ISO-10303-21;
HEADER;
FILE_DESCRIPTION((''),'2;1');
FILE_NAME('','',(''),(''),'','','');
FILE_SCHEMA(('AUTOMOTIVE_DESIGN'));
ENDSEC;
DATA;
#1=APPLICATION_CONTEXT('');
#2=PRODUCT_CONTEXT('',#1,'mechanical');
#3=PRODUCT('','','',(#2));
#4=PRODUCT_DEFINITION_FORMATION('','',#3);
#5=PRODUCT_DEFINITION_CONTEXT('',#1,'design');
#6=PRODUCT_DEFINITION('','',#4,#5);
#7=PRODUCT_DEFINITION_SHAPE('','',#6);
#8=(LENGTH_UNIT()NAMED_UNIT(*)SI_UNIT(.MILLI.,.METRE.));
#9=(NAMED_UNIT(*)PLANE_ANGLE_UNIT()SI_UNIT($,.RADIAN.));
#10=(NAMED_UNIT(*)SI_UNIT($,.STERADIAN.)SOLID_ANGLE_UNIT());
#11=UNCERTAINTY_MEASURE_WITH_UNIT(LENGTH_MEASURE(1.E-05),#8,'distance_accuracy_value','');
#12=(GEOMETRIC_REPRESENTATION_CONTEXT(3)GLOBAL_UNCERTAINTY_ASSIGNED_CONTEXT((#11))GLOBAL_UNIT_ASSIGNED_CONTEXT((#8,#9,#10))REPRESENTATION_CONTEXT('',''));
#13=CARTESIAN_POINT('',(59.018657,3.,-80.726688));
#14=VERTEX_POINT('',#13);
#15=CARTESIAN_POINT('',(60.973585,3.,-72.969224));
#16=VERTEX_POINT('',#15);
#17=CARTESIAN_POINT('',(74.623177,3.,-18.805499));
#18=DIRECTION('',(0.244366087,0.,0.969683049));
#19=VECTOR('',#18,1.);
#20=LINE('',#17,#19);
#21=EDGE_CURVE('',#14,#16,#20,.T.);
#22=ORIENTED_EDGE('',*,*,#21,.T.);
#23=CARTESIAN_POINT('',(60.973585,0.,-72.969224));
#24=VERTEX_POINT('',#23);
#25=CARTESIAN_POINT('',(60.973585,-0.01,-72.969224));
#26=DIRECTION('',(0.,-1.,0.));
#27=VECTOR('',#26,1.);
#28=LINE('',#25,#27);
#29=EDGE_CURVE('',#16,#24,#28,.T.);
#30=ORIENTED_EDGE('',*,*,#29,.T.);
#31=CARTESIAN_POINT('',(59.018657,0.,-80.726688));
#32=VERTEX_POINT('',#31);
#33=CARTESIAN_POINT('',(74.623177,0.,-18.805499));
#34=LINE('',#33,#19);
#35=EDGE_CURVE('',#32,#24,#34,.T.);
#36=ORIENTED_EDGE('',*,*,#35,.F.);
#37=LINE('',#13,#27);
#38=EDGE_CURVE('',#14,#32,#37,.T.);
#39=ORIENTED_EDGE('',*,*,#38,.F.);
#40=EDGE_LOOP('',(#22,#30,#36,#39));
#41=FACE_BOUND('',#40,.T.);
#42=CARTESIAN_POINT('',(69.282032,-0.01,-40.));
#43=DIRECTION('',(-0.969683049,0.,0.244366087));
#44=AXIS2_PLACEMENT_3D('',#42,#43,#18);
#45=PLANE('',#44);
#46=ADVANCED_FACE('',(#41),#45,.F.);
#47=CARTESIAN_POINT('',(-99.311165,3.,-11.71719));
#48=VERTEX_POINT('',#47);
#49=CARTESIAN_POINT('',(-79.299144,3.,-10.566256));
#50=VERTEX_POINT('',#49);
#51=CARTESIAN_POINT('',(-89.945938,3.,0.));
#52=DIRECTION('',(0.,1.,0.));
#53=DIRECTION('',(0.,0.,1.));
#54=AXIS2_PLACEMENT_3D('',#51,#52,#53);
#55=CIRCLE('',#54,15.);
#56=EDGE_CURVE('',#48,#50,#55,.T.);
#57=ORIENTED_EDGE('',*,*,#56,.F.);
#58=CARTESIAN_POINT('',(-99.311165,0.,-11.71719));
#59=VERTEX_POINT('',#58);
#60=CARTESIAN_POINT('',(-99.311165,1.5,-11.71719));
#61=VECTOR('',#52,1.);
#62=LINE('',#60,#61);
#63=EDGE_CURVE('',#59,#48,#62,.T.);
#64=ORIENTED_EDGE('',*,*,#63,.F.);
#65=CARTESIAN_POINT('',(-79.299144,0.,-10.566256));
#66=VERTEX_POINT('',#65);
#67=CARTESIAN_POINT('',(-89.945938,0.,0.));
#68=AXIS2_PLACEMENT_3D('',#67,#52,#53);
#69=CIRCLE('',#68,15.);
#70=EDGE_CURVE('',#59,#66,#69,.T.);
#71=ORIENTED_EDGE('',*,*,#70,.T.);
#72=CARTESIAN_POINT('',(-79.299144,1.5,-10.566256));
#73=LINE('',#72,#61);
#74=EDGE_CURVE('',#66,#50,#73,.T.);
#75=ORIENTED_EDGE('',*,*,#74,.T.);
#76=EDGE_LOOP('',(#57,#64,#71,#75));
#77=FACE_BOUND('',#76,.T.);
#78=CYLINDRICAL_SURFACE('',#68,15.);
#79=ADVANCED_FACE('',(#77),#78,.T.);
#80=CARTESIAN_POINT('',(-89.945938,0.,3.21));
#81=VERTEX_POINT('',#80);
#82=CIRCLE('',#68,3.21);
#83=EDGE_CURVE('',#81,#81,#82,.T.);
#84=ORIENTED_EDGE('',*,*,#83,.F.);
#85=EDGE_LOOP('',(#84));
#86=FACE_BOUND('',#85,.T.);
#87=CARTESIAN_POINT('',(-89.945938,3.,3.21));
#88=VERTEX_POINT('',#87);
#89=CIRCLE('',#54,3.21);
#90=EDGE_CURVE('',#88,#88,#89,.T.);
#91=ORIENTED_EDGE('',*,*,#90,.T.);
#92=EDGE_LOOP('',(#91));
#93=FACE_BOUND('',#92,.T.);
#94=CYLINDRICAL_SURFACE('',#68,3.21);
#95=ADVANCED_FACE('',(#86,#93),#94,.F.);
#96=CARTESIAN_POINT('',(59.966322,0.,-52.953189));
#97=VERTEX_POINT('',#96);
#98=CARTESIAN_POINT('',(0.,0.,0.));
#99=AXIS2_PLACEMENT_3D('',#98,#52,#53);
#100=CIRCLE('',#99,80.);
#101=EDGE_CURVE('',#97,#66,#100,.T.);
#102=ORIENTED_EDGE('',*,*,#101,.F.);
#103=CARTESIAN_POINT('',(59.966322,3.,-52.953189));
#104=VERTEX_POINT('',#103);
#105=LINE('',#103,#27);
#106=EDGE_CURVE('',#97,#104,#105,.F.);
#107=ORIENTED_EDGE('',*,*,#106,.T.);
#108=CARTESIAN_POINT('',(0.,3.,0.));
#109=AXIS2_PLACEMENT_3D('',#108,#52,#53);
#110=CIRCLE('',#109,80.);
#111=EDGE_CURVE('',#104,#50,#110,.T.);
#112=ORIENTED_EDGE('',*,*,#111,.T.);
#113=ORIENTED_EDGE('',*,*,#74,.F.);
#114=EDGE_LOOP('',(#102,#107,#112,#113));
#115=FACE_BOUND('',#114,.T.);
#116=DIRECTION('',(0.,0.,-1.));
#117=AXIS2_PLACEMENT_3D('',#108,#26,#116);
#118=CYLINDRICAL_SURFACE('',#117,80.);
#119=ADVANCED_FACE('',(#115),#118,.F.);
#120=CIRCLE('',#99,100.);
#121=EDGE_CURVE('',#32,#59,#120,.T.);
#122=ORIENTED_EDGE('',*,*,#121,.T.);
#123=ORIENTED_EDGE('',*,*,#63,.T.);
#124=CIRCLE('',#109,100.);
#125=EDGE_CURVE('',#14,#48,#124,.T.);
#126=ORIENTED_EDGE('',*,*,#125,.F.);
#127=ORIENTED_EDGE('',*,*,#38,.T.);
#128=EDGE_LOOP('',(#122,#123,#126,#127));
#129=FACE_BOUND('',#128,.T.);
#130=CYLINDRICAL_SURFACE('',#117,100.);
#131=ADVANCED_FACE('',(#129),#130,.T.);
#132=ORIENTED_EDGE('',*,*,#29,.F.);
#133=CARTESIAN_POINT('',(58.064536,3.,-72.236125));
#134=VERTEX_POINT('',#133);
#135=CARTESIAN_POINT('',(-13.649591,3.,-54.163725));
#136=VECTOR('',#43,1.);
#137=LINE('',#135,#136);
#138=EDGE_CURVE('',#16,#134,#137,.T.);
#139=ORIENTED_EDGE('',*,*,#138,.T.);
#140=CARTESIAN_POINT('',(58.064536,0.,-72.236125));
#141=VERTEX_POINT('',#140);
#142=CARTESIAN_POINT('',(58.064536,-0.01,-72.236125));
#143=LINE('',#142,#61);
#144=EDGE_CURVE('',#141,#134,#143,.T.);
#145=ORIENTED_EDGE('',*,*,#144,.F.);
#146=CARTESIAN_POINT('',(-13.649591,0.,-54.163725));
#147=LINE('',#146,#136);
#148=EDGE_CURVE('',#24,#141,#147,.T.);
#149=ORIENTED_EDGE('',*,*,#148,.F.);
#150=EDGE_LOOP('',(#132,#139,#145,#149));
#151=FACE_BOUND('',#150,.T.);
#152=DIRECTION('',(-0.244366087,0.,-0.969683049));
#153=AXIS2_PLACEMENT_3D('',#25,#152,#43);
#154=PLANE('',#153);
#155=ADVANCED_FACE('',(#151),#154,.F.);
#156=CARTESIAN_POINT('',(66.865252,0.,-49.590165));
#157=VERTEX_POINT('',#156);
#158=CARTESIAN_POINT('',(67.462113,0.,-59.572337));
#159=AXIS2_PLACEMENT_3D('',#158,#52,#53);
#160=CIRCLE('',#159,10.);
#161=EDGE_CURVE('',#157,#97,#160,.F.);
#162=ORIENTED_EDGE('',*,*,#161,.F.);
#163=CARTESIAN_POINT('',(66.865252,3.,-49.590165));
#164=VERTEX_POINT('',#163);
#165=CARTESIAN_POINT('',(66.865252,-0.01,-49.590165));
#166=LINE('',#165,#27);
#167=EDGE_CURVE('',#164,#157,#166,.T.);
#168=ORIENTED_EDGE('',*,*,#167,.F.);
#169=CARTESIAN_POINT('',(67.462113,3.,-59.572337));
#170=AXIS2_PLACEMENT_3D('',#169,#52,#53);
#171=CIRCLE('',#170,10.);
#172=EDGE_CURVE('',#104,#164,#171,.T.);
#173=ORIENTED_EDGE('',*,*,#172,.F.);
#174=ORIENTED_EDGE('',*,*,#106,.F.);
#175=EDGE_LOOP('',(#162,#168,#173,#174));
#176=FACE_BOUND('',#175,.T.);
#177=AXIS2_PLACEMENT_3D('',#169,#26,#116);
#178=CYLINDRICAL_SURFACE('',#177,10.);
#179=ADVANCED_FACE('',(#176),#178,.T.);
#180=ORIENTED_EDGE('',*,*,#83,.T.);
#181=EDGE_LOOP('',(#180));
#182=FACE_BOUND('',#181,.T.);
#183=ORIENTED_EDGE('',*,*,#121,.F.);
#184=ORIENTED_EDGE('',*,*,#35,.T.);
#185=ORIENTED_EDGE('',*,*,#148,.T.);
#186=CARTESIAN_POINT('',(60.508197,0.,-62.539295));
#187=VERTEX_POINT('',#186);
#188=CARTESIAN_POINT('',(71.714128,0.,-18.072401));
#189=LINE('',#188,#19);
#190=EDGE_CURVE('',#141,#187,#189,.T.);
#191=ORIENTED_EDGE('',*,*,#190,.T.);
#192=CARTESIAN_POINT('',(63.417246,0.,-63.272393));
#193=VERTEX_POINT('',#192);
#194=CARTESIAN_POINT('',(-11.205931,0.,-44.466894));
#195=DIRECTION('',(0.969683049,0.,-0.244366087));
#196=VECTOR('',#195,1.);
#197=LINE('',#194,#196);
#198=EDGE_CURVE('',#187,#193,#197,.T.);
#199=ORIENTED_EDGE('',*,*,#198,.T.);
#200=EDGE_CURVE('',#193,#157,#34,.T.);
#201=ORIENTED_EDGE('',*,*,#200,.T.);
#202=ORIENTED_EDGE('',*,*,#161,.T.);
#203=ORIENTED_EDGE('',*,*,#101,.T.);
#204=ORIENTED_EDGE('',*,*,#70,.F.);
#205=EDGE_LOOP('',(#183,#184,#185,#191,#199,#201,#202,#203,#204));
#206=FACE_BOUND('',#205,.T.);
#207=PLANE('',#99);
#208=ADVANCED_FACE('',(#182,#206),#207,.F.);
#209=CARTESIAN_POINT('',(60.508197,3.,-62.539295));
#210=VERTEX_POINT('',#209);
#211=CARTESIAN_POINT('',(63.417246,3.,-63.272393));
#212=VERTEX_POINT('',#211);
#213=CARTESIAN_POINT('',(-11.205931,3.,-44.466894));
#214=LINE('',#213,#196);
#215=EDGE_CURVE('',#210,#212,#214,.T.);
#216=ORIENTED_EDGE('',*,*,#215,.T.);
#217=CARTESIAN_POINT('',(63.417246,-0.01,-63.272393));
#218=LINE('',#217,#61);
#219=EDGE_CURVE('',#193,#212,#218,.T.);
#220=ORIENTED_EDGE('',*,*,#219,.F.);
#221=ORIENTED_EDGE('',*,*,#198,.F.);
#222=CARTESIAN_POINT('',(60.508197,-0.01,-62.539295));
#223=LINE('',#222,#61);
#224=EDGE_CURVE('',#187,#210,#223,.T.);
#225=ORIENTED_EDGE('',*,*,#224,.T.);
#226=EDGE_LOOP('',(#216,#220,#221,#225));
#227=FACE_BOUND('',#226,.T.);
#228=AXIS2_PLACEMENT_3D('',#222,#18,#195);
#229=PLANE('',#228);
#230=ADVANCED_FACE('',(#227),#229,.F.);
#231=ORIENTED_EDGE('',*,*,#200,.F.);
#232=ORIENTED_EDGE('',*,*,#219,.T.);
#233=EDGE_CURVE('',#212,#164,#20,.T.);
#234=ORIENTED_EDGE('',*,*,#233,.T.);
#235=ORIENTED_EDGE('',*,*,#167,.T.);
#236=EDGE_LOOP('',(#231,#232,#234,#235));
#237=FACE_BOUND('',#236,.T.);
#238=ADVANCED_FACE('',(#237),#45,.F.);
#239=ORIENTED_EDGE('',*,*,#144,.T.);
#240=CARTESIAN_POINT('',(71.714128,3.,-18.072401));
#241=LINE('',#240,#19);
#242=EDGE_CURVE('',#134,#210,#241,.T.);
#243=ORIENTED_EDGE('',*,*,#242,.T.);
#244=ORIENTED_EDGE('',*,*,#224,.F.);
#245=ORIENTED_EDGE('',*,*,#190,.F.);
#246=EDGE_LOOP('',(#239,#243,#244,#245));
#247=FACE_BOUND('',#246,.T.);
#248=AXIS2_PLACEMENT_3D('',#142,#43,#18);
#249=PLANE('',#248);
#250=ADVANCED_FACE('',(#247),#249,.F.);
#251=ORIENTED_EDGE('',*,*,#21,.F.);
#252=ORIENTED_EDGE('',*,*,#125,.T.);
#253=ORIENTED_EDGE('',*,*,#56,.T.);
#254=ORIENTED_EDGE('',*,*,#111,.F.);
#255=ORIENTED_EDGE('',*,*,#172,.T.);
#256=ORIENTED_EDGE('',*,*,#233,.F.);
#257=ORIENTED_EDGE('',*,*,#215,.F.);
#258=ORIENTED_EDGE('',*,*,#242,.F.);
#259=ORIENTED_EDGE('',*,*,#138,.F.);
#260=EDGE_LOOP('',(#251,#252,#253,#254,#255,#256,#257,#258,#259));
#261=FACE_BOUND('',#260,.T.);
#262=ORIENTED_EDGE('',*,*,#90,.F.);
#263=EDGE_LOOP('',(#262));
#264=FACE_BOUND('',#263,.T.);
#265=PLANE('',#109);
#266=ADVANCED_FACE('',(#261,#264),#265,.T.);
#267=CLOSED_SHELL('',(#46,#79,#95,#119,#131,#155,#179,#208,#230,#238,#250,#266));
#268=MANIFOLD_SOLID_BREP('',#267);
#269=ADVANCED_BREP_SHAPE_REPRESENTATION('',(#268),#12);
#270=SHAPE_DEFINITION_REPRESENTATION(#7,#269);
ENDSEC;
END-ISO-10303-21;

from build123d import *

# Parameters (mm, degrees)
SKETCH3_R              = 100
SKETCH3_R_2            = 80
BOSS_EXTRUDE1_DEPTH    = 3
SPLIT2_SURFACE_1_BACK  = 283.859
SPLIT2_SURFACE_1_DEPTH = 567.718
SPLIT2_SURFACE_2_BACK  = 283.859
SPLIT2_SURFACE_2_DEPTH = 567.718
BODY_DELETE1_DEPTH     = 3
SKETCH5_R              = 15
BOSS_EXTRUDE2_DEPTH    = 3
SKETCH6_R              = 3.21
CUT_EXTRUDE1_DEPTH     = 3
SPLIT3_SURFACE_3_BACK  = 209.781
SPLIT3_SURFACE_3_DEPTH = 419.562
SPLIT3_SURFACE_4_BACK  = 209.781
SPLIT3_SURFACE_4_DEPTH = 419.562
SPLIT4_SURFACE_5_BACK  = 209.781
SPLIT4_SURFACE_5_DEPTH = 419.562
SPLIT4_SURFACE_6_BACK  = 209.781
SPLIT4_SURFACE_6_DEPTH = 419.562
FILLET1_R              = 10
SPLIT5_SURFACE_7_BACK  = 207.768
SPLIT5_SURFACE_7_DEPTH = 415.536
SPLIT5_SURFACE_8_BACK  = 207.768
SPLIT5_SURFACE_8_DEPTH = 415.536


# Read off the part's stored shape, not the designer's step: Body-Delete1
with BuildPart() as part:
    # Sketch3 → Boss-Extrude1 (new body)
    with BuildSketch(Plane(origin=(0, 0, 0), x_dir=(1, 0, 0), z_dir=(0, 1, 0))):
        with Locations(Location((0, 0, 0), (0, 0, 270))):
            Circle(SKETCH3_R)
        with Locations(Location((0, 0, 0), (0, 0, 270))):
            Circle(SKETCH3_R_2, mode=Mode.SUBTRACT)
    extrude(amount=BOSS_EXTRUDE1_DEPTH)


with BuildPart() as body_2:
    # Split2: the piece behind the surface
    add(part.part)
    # Split2 surface: a surface, the sketch's curves swept straight by 567.718 mm
    with BuildLine(Plane(origin=(0, 3, 0), x_dir=(1, 0, 0), z_dir=(0, 1, 0)).offset(-SPLIT2_SURFACE_1_BACK), mode=Mode.PRIVATE) as split2_surface_1_path:
        Line((69.282032303, 72.111025509), (69.282032303, 40))
        Line((69.282032303, 40), (69.282032303, 0))
        Line((69.282032303, 0), (-114.167790304, 0))
        Line((-114.167790304, 0), (-114.167790304, -108.297460661))
        Line((-114.167790304, -108.297460661), (110.524137422, -108.297460661))
        Line((110.524137422, -108.297460661), (110.524137422, 72.111025509))
        Line((110.524137422, 72.111025509), (69.282032303, 72.111025509))
    split2_surface_1 = Shell.extrude(split2_surface_1_path.wire(), (0 * SPLIT2_SURFACE_1_DEPTH, 1 * SPLIT2_SURFACE_1_DEPTH, 0 * SPLIT2_SURFACE_1_DEPTH))
    split(bisect_by=split2_surface_1, keep=Keep.BOTTOM)

    # Sketch5 → Boss-Extrude2 (add)
    with BuildSketch(Plane(origin=(0, 3, 0), x_dir=(1, 0, 0), z_dir=(0, 1, 0))):
        with Locations((-89.945938306, 0)):
            Circle(SKETCH5_R)
    extrude(amount=-BOSS_EXTRUDE2_DEPTH)

    # Sketch6 → Cut-Extrude1 (cut)
    with BuildSketch(Plane(origin=(0, 3, 0), x_dir=(1, 0, 0), z_dir=(0, 1, 0))):
        with Locations(Location((-89.945938306, 0, 0), (0, 0, 270))):
            Circle(SKETCH6_R)
    extrude(amount=-CUT_EXTRUDE1_DEPTH, mode=Mode.SUBTRACT)


with BuildPart() as part_1:
    add(part.part)

    # Split2: split by a surface, the side it looks to stays
    # Split2 surface: a surface, the sketch's curves swept straight by 567.718 mm
    with BuildLine(Plane(origin=(0, 3, 0), x_dir=(1, 0, 0), z_dir=(0, 1, 0)).offset(-SPLIT2_SURFACE_2_BACK), mode=Mode.PRIVATE) as split2_surface_2_path:
        Line((69.282032303, 72.111025509), (69.282032303, 40))
        Line((69.282032303, 40), (69.282032303, 0))
        Line((69.282032303, 0), (-114.167790304, 0))
        Line((-114.167790304, 0), (-114.167790304, -108.297460661))
        Line((-114.167790304, -108.297460661), (110.524137422, -108.297460661))
        Line((110.524137422, -108.297460661), (110.524137422, 72.111025509))
        Line((110.524137422, 72.111025509), (69.282032303, 72.111025509))
    split2_surface_2 = Shell.extrude(split2_surface_2_path.wire(), (0 * SPLIT2_SURFACE_2_DEPTH, 1 * SPLIT2_SURFACE_2_DEPTH, 0 * SPLIT2_SURFACE_2_DEPTH))
    split(bisect_by=split2_surface_2, keep=Keep.TOP)

    # Body-Delete1 outline → Body-Delete1 (cut)
    with BuildSketch(Plane(origin=(0, 0, 0), x_dir=(1, 0, 0), z_dir=(0, 1, 0))):
        with BuildLine():
            ThreePointArc((-100, 0), (39.190539482, -92.000552255), (69.282032303, 72.111025509))
            Line((69.282032303, 72.111025509), (69.282032303, 40))
            ThreePointArc((69.282032303, 40), (20.705523608, -77.274066103), (-80, 0))
            Line((-80, 0), (-100, 0))
        make_face()
    extrude(amount=BODY_DELETE1_DEPTH, mode=Mode.SUBTRACT)


with BuildPart() as body_2_2:
    # Split3: the piece behind the surface
    add(body_2.part)
    # Split3 surface: a surface, the sketch's curves swept straight by 419.562 mm
    with BuildLine(Plane(origin=(0, 3, 0), x_dir=(1, 0, 0), z_dir=(0, 1, 0)).offset(-SPLIT3_SURFACE_3_BACK), mode=Mode.PRIVATE) as split3_surface_3_path:
        Line((69.282032303, 40), (59.018656665, 80.726688062))
        Line((59.018656665, 80.726688062), (73.479070656, 80.726688062))
        Line((73.479070656, 80.726688062), (69.282032303, 40))
    split3_surface_3 = Shell.extrude(split3_surface_3_path.wire(), (0 * SPLIT3_SURFACE_3_DEPTH, 1 * SPLIT3_SURFACE_3_DEPTH, 0 * SPLIT3_SURFACE_3_DEPTH))
    split(bisect_by=split3_surface_3, keep=Keep.BOTTOM)


with BuildPart() as body_2_1:
    add(body_2.part)

    # Split3: split by a surface, the side it looks to stays
    # Split3 surface: a surface, the sketch's curves swept straight by 419.562 mm
    with BuildLine(Plane(origin=(0, 3, 0), x_dir=(1, 0, 0), z_dir=(0, 1, 0)).offset(-SPLIT3_SURFACE_4_BACK), mode=Mode.PRIVATE) as split3_surface_4_path:
        Line((69.282032303, 40), (59.018656665, 80.726688062))
        Line((59.018656665, 80.726688062), (73.479070656, 80.726688062))
        Line((73.479070656, 80.726688062), (69.282032303, 40))
    split3_surface_4 = Shell.extrude(split3_surface_4_path.wire(), (0 * SPLIT3_SURFACE_4_DEPTH, 1 * SPLIT3_SURFACE_4_DEPTH, 0 * SPLIT3_SURFACE_4_DEPTH))
    split(bisect_by=split3_surface_4, keep=Keep.TOP)


with BuildPart() as body_2_3:
    # Split4: the piece behind the surface
    add(body_2_1.part)
    # Split4 surface: a surface, the sketch's curves swept straight by 419.562 mm
    with BuildLine(Plane(origin=(0, 3, 0), x_dir=(1, 0, 0), z_dir=(0, 1, 0)).offset(-SPLIT4_SURFACE_5_BACK), mode=Mode.PRIVATE) as split4_surface_5_path:
        Line((66.865251706, 49.590165356), (62.98651951, 48.612701009))
        Line((62.98651951, 48.612701009), (66.652010809, 34.067455273))
        Line((66.652010809, 34.067455273), (71.500426054, 35.289285706))
        Line((71.500426054, 35.289285706), (67.834934755, 49.834531442))
        Line((67.834934755, 49.834531442), (66.865251706, 49.590165356))
    split4_surface_5 = Shell.extrude(split4_surface_5_path.wire(), (0 * SPLIT4_SURFACE_5_DEPTH, 1 * SPLIT4_SURFACE_5_DEPTH, 0 * SPLIT4_SURFACE_5_DEPTH))
    split(bisect_by=split4_surface_5, keep=Keep.BOTTOM)

    # Fillet1
    # the kernel refuses this fillet: 10 mm, written as the material it takes off along each edge
    with BuildSketch(Plane(origin=(63.446918188, 16.684080126, -48.728724305), x_dir=(-0.6358841650465459, 0, -0.7717845092012777), z_dir=(0, -1, 0))) as fillet1_piece_1:
        with BuildLine():
            CenterArc((5.815734054, 9.994146598), FILLET1_R, 222.907386502, 45.132130872)
            Line((-1.508817296, 3.185993579), (-1.655308323, 3.049830519))
            ThreePointArc((-1.655308323, 3.049830519), (-0.935163624, 1.507395163), (-0.180754976, -0.085601627))
            Line((-0.180754976, -0.085601627), (0.00684204, -0.199882932))
            ThreePointArc((0.00684204, -0.199882932), (2.736816025, -0.153172783), (5.46679001, -0.199882932))
            Line((5.46679001, -0.199882932), (5.47363205, 0))
        make_face()
    extrude(amount=30.368160252, mode=Mode.SUBTRACT)


with BuildPart() as body_2_4:
    add(body_2_1.part)

    # Split4: split by a surface, the side it looks to stays
    # Split4 surface: a surface, the sketch's curves swept straight by 419.562 mm
    with BuildLine(Plane(origin=(0, 3, 0), x_dir=(1, 0, 0), z_dir=(0, 1, 0)).offset(-SPLIT4_SURFACE_6_BACK), mode=Mode.PRIVATE) as split4_surface_6_path:
        Line((66.865251706, 49.590165356), (62.98651951, 48.612701009))
        Line((62.98651951, 48.612701009), (66.652010809, 34.067455273))
        Line((66.652010809, 34.067455273), (71.500426054, 35.289285706))
        Line((71.500426054, 35.289285706), (67.834934755, 49.834531442))
        Line((67.834934755, 49.834531442), (66.865251706, 49.590165356))
    split4_surface_6 = Shell.extrude(split4_surface_6_path.wire(), (0 * SPLIT4_SURFACE_6_DEPTH, 1 * SPLIT4_SURFACE_6_DEPTH, 0 * SPLIT4_SURFACE_6_DEPTH))
    split(bisect_by=split4_surface_6, keep=Keep.TOP)


with BuildPart() as body_2_4_1:
    # Split5: the piece behind the surface
    add(body_2_3.part)
    # Split5 surface: a surface, the sketch's curves swept straight by 415.536 mm
    with BuildLine(Plane(origin=(0, 3, 0), x_dir=(1, 0, 0), z_dir=(0, 1, 0)).offset(-SPLIT5_SURFACE_7_BACK), mode=Mode.PRIVATE) as split5_surface_7_path:
        Line((60.973585358, 72.969223669), (58.06453621, 72.23612541))
        Line((58.06453621, 72.23612541), (60.508197077, 62.539294919))
        Line((60.508197077, 62.539294919), (68.981543377, 64.674630251))
        Line((68.981543377, 64.674630251), (66.537882511, 74.371460742))
        Line((66.537882511, 74.371460742), (60.973585358, 72.969223669))
    split5_surface_7 = Shell.extrude(split5_surface_7_path.wire(), (0 * SPLIT5_SURFACE_7_DEPTH, 1 * SPLIT5_SURFACE_7_DEPTH, 0 * SPLIT5_SURFACE_7_DEPTH))
    split(bisect_by=split5_surface_7, keep=Keep.BOTTOM)


with BuildPart() as body_2_3_1:
    add(body_2_3.part)

    # Split5: split by a surface, the side it looks to stays
    # Split5 surface: a surface, the sketch's curves swept straight by 415.536 mm
    with BuildLine(Plane(origin=(0, 3, 0), x_dir=(1, 0, 0), z_dir=(0, 1, 0)).offset(-SPLIT5_SURFACE_8_BACK), mode=Mode.PRIVATE) as split5_surface_8_path:
        Line((60.973585358, 72.969223669), (58.06453621, 72.23612541))
        Line((58.06453621, 72.23612541), (60.508197077, 62.539294919))
        Line((60.508197077, 62.539294919), (68.981543377, 64.674630251))
        Line((68.981543377, 64.674630251), (66.537882511, 74.371460742))
        Line((66.537882511, 74.371460742), (60.973585358, 72.969223669))
    split5_surface_8 = Shell.extrude(split5_surface_8_path.wire(), (0 * SPLIT5_SURFACE_8_DEPTH, 1 * SPLIT5_SURFACE_8_DEPTH, 0 * SPLIT5_SURFACE_8_DEPTH))
    split(bisect_by=split5_surface_8, keep=Keep.TOP)


solid = body_2_4_1.part
